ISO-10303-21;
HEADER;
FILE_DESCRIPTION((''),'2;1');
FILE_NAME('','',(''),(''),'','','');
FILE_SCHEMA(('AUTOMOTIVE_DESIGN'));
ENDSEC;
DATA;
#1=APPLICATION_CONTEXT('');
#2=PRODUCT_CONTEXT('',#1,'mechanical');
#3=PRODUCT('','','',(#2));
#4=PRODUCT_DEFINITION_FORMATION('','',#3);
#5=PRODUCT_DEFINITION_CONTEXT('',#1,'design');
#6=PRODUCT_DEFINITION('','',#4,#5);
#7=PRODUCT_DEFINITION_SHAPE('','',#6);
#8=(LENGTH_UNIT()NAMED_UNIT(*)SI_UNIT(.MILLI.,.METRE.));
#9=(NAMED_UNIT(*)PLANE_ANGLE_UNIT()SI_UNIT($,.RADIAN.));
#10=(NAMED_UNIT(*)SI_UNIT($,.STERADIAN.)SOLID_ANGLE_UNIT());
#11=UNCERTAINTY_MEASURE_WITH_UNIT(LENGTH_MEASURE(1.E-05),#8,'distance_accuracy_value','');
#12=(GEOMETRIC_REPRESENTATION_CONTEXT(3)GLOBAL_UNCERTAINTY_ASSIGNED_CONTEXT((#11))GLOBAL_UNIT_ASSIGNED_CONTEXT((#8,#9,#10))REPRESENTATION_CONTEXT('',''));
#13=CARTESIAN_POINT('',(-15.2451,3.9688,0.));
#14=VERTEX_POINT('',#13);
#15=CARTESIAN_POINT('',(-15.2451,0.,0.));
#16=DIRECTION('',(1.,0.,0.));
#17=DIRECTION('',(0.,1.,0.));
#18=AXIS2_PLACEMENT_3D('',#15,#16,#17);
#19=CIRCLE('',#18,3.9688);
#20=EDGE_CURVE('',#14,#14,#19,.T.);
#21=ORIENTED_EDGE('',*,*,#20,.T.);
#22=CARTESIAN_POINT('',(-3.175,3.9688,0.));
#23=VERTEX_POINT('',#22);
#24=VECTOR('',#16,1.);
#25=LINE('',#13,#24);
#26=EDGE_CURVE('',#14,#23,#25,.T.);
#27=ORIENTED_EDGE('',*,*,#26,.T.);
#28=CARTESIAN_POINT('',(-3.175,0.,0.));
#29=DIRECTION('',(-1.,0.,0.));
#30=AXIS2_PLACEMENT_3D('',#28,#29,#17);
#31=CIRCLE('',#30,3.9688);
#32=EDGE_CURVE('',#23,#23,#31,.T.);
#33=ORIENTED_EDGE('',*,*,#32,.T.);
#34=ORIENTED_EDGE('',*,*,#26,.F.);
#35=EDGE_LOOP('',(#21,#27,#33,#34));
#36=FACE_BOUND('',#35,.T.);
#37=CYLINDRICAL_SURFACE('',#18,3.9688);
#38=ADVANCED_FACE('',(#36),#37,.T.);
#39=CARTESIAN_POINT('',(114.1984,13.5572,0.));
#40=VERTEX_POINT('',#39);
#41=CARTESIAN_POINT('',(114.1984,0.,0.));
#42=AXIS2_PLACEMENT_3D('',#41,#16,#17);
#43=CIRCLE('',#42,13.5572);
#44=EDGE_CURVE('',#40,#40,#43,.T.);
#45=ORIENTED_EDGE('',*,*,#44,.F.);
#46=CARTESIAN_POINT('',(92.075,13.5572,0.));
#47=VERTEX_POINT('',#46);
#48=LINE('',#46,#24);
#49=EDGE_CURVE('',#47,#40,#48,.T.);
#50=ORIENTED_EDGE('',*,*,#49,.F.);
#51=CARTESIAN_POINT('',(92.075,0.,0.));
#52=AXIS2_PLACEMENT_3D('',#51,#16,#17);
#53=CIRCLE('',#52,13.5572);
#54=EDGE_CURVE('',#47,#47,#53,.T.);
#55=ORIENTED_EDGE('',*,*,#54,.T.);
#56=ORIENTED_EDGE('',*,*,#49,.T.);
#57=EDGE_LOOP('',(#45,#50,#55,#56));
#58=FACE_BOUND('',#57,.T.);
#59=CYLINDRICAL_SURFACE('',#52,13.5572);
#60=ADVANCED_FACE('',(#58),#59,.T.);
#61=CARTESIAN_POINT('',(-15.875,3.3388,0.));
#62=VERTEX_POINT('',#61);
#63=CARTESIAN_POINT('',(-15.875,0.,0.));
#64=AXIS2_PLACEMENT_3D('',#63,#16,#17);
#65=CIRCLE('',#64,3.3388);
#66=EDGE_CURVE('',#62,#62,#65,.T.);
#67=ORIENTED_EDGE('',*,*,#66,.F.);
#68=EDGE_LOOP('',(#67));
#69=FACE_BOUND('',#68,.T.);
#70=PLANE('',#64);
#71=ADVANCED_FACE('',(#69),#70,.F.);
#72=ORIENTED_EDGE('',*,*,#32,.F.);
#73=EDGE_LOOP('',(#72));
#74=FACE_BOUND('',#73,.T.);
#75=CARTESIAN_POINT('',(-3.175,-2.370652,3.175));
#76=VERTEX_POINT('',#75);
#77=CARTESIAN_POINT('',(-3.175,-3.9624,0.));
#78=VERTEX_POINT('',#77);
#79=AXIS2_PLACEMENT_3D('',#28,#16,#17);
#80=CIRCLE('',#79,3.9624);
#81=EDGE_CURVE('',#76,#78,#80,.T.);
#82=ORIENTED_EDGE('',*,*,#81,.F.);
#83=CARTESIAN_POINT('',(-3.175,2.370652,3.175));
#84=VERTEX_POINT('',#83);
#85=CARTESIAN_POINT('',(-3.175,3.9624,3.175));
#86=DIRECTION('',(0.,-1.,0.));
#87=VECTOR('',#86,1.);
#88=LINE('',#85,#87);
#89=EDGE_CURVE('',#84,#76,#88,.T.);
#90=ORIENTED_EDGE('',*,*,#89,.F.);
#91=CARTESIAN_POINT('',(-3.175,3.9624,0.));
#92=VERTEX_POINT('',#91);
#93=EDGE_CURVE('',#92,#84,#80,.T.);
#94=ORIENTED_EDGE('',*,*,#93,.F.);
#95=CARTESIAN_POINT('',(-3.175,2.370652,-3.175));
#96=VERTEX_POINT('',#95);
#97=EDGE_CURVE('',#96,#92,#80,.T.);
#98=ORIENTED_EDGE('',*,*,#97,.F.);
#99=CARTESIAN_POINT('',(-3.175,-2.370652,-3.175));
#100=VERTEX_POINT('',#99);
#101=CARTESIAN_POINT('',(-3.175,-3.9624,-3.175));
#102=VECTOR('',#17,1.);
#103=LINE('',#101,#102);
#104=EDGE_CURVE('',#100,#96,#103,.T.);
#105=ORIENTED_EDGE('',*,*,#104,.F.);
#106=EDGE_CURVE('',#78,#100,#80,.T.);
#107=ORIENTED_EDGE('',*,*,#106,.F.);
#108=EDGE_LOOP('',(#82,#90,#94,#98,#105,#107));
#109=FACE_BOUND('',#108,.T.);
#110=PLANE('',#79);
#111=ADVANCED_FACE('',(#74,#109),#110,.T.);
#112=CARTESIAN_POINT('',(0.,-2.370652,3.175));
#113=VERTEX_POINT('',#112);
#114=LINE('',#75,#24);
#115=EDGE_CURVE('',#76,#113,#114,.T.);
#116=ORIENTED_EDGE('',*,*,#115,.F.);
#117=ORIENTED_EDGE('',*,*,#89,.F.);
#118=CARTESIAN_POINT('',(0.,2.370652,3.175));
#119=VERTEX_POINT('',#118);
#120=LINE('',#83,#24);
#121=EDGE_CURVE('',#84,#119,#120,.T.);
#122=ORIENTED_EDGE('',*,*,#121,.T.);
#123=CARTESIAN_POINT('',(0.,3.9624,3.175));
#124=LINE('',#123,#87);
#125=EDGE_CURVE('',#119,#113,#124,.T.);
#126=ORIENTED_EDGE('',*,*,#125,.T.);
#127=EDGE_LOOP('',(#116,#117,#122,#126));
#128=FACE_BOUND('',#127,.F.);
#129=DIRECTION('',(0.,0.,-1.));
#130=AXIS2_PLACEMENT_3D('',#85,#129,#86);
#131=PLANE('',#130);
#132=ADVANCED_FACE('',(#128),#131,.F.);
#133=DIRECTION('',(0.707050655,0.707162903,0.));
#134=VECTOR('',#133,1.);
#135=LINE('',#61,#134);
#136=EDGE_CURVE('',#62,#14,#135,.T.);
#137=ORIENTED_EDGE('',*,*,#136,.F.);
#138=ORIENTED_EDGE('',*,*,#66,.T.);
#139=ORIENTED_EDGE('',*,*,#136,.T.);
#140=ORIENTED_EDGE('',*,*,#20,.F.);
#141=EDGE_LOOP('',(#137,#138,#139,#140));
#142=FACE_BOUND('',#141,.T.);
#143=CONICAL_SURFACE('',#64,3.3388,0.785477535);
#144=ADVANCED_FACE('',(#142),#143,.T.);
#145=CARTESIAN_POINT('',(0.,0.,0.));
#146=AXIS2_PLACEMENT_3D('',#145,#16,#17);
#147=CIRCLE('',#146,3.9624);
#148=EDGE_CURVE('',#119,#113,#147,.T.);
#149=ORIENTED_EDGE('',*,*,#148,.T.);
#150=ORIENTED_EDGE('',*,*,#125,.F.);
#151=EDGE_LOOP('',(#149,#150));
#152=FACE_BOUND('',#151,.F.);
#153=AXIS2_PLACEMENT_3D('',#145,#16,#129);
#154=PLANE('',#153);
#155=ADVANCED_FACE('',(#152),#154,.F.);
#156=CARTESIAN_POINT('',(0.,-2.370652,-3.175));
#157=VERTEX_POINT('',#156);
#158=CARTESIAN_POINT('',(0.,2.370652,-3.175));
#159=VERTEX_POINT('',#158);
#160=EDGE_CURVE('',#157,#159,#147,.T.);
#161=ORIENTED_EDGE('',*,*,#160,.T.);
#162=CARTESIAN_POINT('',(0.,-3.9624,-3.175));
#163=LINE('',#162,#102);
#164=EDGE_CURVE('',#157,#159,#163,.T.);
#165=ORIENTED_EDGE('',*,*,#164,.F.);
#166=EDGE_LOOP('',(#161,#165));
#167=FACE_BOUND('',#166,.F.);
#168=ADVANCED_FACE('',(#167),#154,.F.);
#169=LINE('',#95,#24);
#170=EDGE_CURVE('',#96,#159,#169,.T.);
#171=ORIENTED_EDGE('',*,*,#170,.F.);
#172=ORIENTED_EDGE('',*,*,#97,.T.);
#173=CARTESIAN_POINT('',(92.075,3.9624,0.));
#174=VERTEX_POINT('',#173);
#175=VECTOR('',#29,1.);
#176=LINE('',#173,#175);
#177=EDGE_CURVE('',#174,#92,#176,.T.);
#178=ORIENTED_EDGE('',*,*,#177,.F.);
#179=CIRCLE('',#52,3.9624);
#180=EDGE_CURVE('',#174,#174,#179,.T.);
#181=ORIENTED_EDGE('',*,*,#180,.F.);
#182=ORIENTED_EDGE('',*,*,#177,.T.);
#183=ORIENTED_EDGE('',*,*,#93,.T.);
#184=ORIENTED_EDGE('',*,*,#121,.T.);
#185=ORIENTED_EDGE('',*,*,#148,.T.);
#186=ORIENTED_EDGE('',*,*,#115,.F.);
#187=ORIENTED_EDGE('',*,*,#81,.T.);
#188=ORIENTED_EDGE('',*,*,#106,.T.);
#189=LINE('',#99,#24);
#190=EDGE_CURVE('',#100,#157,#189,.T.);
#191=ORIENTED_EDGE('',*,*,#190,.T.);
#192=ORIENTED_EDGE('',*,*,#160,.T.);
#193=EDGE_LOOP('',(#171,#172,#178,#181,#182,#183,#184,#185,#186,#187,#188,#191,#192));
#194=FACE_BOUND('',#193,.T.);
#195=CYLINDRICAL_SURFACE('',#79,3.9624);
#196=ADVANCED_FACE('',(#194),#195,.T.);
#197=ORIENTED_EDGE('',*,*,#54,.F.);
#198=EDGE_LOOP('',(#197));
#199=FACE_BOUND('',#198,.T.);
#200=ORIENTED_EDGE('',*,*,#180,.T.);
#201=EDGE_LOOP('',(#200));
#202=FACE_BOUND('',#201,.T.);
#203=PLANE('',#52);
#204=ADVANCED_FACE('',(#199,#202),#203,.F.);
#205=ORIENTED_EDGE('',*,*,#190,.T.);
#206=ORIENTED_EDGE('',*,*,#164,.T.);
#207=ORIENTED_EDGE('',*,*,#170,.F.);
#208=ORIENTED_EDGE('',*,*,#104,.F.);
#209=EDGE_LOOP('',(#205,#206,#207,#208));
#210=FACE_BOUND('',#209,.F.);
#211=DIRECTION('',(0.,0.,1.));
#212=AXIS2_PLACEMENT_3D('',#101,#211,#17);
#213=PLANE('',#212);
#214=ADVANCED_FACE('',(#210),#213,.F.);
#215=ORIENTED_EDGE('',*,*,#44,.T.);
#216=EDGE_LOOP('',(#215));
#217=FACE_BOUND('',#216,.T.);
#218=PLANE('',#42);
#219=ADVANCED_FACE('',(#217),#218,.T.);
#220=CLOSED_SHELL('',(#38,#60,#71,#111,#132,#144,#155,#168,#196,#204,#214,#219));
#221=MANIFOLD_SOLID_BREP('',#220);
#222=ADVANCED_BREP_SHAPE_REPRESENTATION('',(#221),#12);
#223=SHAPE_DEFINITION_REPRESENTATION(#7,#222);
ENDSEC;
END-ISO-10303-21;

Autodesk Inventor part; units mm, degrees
sketch "Sketch_1" plane through (0, 0, 0) normal (0, 0, 1) x (1, 0, 0)
  line L0 (114.1984, 0) -> (-3.175, 0)
  line L1 (-3.175, 0) -> (-3.175, 3.9624)
  line L2 (-3.175, 3.9624) -> (92.075, 3.9624)
  line L3 (92.075, 3.9624) -> (92.075, 13.5572)
  line L4 (92.075, 13.5572) -> (114.1984, 13.5572)
  line L5 (114.1984, 13.5572) -> (114.1984, 0)
  line L6 (114.1984, 0) -> (-3.175, 0)
revolve "Revolution1" add sketch "Sketch_1" angle 360 about axis through (114.1984, 0, 0) along (1, 0, 0)
sketch "Sketch_3" plane through (0, 0, 0) normal (0, 0, 1) x (1, 0, 0)
  line L0 (-3.175, 0) -> (-15.875, 0)
  line L1 (-15.875, 0) -> (-15.875, 3.3388)
  line L2 (-15.875, 3.3388) -> (-15.2451, 3.9688)
  line L3 (-15.2451, 3.9688) -> (-3.175, 3.9688)
  line L4 (-3.175, 3.9688) -> (-3.175, 0)
  line L5 (-3.175, 0) -> (-15.875, 0)
revolve "Revolution2" add sketch "Sketch_3" angle 360 about axis through (-3.175, 0, 0) along (1, 0, 0)
thread "Thread1" size "5/16-24 UNF" class "2A" standard "ANSI Unified Screw Threads" full length
sketch "Sketch_10" plane through (-3.175, 0, 0) normal (1, 0, 0) x (0, 0, -1)
  line L0 (-7.9248, -7.9248) -> (7.9248, -7.9248)
  line L1 (7.9248, -7.9248) -> (7.9248, 7.9248)
  line L2 (7.9248, 7.9248) -> (-7.9248, 7.9248)
  line L3 (-7.9248, 7.9248) -> (-7.9248, -7.9248)
  line L4 (-3.175, -3.9624) -> (3.175, -3.9624)
  line L5 (3.175, -3.9624) -> (3.175, 3.9624)
  line L6 (3.175, 3.9624) -> (-3.175, 3.9624)
  line L7 (-3.175, 3.9624) -> (-3.175, -3.9624)
extrude "Extrusion1" cut sketch "Sketch_10" along normal blind 3.175
ref_plane "dia1_XY" through (-3.175, 3.9624, 0) normal (1, 0, 0) x (0, 0, -1)
ref_plane "dia1_YZ" through (-3.175, 3.9624, 0) normal (0, 0, -1) x (0, 1, 0)
ref_plane "dia1_ZX" through (-3.175, 3.9624, 0) normal (0, 1, 0) x (1, 0, 0)
ref_plane "dia12_XY" through (0, 0, 14.1351) normal (1, 0, 0) x (0, 0, -1)
ref_plane "dia12_YZ" through (0, 0, 14.1351) normal (0, 0, -1) x (0, 1, 0)
ref_plane "dia12_ZX" through (0, 0, 14.1351) normal (0, 1, 0) x (1, 0, 0)
ref_plane "dia2_XY" through (-3.175, -3.9624, 0) normal (1, 0, 0) x (0, 0, -1)
ref_plane "dia2_YZ" through (-3.175, -3.9624, 0) normal (0, 0, -1) x (0, 1, 0)
ref_plane "dia2_ZX" through (-3.175, -3.9624, 0) normal (0, 1, 0) x (1, 0, 0)
ref_plane "dia22_XY" through (0, 0, -14.1351) normal (1, 0, 0) x (0, 0, -1)
ref_plane "dia22_YZ" through (0, 0, -14.1351) normal (0, 0, -1) x (0, 1, 0)
ref_plane "dia22_ZX" through (0, 0, -14.1351) normal (0, 1, 0) x (1, 0, 0)
ref_plane "rl1_XY" through (-15.875, 0, 0) normal (1, 0, 0) x (0, 0, -1)
ref_plane "rl1_YZ" through (-15.875, 0, 0) normal (0, 0, -1) x (0, 1, 0)
ref_plane "rl1_ZX" through (-15.875, 0, 0) normal (0, 1, 0) x (1, 0, 0)
ref_plane "rl2_XY" through (-3.175, 0, 0) normal (1, 0, 0) x (0, 0, -1)
ref_plane "rl2_YZ" through (-3.175, 0, 0) normal (0, 0, -1) x (0, 1, 0)
ref_plane "rl2_ZX" through (-3.175, 0, 0) normal (0, 1, 0) x (1, 0, 0)
ref_plane "rod_cp_XY" through (0, 0, 0) normal (1, 0, 0) x (0, 0, -1)
ref_plane "rod_cp_YZ" through (0, 0, 0) normal (0, 0, -1) x (0, 1, 0)
ref_plane "rod_cp_ZX" through (0, 0, 0) normal (0, 1, 0) x (1, 0, 0)
ref_plane "thd1_XY" through (-15.875, 3.9688, 0) normal (1, 0, 0) x (0, 0, -1)
ref_plane "thd1_YZ" through (-15.875, 3.9688, 0) normal (0, 0, -1) x (0, 1, 0)
ref_plane "thd1_ZX" through (-15.875, 3.9688, 0) normal (0, 1, 0) x (1, 0, 0)
ref_plane "thd2_XY" through (-15.875, -3.9688, 0) normal (1, 0, 0) x (0, 0, -1)
ref_plane "thd2_YZ" through (-15.875, -3.9688, 0) normal (0, 0, -1) x (0, 1, 0)
ref_plane "thd2_ZX" through (-15.875, -3.9688, 0) normal (0, 1, 0) x (1, 0, 0)
ref_plane "to_rod_clevis_XY" through (-20.701, 0, 0) normal (1, 0, 0) x (0, 0, -1)
ref_plane "to_rod_clevis_YZ" through (-20.701, 0, 0) normal (0, 0, -1) x (0, 1, 0)
ref_plane "to_rod_clevis_ZX" through (-20.701, 0, 0) normal (0, 1, 0) x (1, 0, 0)
ref_plane "wf1_XY" through (-3.175, 0, 0) normal (1, 0, 0) x (0, 0, -1)
ref_plane "wf1_YZ" through (-3.175, 0, 0) normal (0, 0, -1) x (0, 1, 0)
ref_plane "wf1_ZX" through (-3.175, 0, 0) normal (0, 1, 0) x (1, 0, 0)
ref_plane "wf2_XY" through (0, 0, 0) normal (1, 0, 0) x (0, 0, -1)
ref_plane "wf2_YZ" through (0, 0, 0) normal (0, 0, -1) x (0, 1, 0)
ref_plane "wf2_ZX" through (0, 0, 0) normal (0, 1, 0) x (1, 0, 0)
ref_plane "wfw1_XY" through (-3.175, 0, -3.175) normal (0, 1, 0) x (1, 0, 0)
ref_plane "wfw1_YZ" through (-3.175, 0, -3.175) normal (1, 0, 0) x (0, 0, -1)
ref_plane "wfw1_ZX" through (-3.175, 0, -3.175) normal (0, 0, -1) x (0, 1, 0)
ref_plane "wfw2_XY" through (-3.175, 0, 3.175) normal (0, 1, 0) x (1, 0, 0)
ref_plane "wfw2_YZ" through (-3.175, 0, 3.175) normal (1, 0, 0) x (0, 0, -1)
ref_plane "wfw2_ZX" through (-3.175, 0, 3.175) normal (0, 0, -1) x (0, 1, 0)
properties part number "SR-092-DPY0000_rod"
